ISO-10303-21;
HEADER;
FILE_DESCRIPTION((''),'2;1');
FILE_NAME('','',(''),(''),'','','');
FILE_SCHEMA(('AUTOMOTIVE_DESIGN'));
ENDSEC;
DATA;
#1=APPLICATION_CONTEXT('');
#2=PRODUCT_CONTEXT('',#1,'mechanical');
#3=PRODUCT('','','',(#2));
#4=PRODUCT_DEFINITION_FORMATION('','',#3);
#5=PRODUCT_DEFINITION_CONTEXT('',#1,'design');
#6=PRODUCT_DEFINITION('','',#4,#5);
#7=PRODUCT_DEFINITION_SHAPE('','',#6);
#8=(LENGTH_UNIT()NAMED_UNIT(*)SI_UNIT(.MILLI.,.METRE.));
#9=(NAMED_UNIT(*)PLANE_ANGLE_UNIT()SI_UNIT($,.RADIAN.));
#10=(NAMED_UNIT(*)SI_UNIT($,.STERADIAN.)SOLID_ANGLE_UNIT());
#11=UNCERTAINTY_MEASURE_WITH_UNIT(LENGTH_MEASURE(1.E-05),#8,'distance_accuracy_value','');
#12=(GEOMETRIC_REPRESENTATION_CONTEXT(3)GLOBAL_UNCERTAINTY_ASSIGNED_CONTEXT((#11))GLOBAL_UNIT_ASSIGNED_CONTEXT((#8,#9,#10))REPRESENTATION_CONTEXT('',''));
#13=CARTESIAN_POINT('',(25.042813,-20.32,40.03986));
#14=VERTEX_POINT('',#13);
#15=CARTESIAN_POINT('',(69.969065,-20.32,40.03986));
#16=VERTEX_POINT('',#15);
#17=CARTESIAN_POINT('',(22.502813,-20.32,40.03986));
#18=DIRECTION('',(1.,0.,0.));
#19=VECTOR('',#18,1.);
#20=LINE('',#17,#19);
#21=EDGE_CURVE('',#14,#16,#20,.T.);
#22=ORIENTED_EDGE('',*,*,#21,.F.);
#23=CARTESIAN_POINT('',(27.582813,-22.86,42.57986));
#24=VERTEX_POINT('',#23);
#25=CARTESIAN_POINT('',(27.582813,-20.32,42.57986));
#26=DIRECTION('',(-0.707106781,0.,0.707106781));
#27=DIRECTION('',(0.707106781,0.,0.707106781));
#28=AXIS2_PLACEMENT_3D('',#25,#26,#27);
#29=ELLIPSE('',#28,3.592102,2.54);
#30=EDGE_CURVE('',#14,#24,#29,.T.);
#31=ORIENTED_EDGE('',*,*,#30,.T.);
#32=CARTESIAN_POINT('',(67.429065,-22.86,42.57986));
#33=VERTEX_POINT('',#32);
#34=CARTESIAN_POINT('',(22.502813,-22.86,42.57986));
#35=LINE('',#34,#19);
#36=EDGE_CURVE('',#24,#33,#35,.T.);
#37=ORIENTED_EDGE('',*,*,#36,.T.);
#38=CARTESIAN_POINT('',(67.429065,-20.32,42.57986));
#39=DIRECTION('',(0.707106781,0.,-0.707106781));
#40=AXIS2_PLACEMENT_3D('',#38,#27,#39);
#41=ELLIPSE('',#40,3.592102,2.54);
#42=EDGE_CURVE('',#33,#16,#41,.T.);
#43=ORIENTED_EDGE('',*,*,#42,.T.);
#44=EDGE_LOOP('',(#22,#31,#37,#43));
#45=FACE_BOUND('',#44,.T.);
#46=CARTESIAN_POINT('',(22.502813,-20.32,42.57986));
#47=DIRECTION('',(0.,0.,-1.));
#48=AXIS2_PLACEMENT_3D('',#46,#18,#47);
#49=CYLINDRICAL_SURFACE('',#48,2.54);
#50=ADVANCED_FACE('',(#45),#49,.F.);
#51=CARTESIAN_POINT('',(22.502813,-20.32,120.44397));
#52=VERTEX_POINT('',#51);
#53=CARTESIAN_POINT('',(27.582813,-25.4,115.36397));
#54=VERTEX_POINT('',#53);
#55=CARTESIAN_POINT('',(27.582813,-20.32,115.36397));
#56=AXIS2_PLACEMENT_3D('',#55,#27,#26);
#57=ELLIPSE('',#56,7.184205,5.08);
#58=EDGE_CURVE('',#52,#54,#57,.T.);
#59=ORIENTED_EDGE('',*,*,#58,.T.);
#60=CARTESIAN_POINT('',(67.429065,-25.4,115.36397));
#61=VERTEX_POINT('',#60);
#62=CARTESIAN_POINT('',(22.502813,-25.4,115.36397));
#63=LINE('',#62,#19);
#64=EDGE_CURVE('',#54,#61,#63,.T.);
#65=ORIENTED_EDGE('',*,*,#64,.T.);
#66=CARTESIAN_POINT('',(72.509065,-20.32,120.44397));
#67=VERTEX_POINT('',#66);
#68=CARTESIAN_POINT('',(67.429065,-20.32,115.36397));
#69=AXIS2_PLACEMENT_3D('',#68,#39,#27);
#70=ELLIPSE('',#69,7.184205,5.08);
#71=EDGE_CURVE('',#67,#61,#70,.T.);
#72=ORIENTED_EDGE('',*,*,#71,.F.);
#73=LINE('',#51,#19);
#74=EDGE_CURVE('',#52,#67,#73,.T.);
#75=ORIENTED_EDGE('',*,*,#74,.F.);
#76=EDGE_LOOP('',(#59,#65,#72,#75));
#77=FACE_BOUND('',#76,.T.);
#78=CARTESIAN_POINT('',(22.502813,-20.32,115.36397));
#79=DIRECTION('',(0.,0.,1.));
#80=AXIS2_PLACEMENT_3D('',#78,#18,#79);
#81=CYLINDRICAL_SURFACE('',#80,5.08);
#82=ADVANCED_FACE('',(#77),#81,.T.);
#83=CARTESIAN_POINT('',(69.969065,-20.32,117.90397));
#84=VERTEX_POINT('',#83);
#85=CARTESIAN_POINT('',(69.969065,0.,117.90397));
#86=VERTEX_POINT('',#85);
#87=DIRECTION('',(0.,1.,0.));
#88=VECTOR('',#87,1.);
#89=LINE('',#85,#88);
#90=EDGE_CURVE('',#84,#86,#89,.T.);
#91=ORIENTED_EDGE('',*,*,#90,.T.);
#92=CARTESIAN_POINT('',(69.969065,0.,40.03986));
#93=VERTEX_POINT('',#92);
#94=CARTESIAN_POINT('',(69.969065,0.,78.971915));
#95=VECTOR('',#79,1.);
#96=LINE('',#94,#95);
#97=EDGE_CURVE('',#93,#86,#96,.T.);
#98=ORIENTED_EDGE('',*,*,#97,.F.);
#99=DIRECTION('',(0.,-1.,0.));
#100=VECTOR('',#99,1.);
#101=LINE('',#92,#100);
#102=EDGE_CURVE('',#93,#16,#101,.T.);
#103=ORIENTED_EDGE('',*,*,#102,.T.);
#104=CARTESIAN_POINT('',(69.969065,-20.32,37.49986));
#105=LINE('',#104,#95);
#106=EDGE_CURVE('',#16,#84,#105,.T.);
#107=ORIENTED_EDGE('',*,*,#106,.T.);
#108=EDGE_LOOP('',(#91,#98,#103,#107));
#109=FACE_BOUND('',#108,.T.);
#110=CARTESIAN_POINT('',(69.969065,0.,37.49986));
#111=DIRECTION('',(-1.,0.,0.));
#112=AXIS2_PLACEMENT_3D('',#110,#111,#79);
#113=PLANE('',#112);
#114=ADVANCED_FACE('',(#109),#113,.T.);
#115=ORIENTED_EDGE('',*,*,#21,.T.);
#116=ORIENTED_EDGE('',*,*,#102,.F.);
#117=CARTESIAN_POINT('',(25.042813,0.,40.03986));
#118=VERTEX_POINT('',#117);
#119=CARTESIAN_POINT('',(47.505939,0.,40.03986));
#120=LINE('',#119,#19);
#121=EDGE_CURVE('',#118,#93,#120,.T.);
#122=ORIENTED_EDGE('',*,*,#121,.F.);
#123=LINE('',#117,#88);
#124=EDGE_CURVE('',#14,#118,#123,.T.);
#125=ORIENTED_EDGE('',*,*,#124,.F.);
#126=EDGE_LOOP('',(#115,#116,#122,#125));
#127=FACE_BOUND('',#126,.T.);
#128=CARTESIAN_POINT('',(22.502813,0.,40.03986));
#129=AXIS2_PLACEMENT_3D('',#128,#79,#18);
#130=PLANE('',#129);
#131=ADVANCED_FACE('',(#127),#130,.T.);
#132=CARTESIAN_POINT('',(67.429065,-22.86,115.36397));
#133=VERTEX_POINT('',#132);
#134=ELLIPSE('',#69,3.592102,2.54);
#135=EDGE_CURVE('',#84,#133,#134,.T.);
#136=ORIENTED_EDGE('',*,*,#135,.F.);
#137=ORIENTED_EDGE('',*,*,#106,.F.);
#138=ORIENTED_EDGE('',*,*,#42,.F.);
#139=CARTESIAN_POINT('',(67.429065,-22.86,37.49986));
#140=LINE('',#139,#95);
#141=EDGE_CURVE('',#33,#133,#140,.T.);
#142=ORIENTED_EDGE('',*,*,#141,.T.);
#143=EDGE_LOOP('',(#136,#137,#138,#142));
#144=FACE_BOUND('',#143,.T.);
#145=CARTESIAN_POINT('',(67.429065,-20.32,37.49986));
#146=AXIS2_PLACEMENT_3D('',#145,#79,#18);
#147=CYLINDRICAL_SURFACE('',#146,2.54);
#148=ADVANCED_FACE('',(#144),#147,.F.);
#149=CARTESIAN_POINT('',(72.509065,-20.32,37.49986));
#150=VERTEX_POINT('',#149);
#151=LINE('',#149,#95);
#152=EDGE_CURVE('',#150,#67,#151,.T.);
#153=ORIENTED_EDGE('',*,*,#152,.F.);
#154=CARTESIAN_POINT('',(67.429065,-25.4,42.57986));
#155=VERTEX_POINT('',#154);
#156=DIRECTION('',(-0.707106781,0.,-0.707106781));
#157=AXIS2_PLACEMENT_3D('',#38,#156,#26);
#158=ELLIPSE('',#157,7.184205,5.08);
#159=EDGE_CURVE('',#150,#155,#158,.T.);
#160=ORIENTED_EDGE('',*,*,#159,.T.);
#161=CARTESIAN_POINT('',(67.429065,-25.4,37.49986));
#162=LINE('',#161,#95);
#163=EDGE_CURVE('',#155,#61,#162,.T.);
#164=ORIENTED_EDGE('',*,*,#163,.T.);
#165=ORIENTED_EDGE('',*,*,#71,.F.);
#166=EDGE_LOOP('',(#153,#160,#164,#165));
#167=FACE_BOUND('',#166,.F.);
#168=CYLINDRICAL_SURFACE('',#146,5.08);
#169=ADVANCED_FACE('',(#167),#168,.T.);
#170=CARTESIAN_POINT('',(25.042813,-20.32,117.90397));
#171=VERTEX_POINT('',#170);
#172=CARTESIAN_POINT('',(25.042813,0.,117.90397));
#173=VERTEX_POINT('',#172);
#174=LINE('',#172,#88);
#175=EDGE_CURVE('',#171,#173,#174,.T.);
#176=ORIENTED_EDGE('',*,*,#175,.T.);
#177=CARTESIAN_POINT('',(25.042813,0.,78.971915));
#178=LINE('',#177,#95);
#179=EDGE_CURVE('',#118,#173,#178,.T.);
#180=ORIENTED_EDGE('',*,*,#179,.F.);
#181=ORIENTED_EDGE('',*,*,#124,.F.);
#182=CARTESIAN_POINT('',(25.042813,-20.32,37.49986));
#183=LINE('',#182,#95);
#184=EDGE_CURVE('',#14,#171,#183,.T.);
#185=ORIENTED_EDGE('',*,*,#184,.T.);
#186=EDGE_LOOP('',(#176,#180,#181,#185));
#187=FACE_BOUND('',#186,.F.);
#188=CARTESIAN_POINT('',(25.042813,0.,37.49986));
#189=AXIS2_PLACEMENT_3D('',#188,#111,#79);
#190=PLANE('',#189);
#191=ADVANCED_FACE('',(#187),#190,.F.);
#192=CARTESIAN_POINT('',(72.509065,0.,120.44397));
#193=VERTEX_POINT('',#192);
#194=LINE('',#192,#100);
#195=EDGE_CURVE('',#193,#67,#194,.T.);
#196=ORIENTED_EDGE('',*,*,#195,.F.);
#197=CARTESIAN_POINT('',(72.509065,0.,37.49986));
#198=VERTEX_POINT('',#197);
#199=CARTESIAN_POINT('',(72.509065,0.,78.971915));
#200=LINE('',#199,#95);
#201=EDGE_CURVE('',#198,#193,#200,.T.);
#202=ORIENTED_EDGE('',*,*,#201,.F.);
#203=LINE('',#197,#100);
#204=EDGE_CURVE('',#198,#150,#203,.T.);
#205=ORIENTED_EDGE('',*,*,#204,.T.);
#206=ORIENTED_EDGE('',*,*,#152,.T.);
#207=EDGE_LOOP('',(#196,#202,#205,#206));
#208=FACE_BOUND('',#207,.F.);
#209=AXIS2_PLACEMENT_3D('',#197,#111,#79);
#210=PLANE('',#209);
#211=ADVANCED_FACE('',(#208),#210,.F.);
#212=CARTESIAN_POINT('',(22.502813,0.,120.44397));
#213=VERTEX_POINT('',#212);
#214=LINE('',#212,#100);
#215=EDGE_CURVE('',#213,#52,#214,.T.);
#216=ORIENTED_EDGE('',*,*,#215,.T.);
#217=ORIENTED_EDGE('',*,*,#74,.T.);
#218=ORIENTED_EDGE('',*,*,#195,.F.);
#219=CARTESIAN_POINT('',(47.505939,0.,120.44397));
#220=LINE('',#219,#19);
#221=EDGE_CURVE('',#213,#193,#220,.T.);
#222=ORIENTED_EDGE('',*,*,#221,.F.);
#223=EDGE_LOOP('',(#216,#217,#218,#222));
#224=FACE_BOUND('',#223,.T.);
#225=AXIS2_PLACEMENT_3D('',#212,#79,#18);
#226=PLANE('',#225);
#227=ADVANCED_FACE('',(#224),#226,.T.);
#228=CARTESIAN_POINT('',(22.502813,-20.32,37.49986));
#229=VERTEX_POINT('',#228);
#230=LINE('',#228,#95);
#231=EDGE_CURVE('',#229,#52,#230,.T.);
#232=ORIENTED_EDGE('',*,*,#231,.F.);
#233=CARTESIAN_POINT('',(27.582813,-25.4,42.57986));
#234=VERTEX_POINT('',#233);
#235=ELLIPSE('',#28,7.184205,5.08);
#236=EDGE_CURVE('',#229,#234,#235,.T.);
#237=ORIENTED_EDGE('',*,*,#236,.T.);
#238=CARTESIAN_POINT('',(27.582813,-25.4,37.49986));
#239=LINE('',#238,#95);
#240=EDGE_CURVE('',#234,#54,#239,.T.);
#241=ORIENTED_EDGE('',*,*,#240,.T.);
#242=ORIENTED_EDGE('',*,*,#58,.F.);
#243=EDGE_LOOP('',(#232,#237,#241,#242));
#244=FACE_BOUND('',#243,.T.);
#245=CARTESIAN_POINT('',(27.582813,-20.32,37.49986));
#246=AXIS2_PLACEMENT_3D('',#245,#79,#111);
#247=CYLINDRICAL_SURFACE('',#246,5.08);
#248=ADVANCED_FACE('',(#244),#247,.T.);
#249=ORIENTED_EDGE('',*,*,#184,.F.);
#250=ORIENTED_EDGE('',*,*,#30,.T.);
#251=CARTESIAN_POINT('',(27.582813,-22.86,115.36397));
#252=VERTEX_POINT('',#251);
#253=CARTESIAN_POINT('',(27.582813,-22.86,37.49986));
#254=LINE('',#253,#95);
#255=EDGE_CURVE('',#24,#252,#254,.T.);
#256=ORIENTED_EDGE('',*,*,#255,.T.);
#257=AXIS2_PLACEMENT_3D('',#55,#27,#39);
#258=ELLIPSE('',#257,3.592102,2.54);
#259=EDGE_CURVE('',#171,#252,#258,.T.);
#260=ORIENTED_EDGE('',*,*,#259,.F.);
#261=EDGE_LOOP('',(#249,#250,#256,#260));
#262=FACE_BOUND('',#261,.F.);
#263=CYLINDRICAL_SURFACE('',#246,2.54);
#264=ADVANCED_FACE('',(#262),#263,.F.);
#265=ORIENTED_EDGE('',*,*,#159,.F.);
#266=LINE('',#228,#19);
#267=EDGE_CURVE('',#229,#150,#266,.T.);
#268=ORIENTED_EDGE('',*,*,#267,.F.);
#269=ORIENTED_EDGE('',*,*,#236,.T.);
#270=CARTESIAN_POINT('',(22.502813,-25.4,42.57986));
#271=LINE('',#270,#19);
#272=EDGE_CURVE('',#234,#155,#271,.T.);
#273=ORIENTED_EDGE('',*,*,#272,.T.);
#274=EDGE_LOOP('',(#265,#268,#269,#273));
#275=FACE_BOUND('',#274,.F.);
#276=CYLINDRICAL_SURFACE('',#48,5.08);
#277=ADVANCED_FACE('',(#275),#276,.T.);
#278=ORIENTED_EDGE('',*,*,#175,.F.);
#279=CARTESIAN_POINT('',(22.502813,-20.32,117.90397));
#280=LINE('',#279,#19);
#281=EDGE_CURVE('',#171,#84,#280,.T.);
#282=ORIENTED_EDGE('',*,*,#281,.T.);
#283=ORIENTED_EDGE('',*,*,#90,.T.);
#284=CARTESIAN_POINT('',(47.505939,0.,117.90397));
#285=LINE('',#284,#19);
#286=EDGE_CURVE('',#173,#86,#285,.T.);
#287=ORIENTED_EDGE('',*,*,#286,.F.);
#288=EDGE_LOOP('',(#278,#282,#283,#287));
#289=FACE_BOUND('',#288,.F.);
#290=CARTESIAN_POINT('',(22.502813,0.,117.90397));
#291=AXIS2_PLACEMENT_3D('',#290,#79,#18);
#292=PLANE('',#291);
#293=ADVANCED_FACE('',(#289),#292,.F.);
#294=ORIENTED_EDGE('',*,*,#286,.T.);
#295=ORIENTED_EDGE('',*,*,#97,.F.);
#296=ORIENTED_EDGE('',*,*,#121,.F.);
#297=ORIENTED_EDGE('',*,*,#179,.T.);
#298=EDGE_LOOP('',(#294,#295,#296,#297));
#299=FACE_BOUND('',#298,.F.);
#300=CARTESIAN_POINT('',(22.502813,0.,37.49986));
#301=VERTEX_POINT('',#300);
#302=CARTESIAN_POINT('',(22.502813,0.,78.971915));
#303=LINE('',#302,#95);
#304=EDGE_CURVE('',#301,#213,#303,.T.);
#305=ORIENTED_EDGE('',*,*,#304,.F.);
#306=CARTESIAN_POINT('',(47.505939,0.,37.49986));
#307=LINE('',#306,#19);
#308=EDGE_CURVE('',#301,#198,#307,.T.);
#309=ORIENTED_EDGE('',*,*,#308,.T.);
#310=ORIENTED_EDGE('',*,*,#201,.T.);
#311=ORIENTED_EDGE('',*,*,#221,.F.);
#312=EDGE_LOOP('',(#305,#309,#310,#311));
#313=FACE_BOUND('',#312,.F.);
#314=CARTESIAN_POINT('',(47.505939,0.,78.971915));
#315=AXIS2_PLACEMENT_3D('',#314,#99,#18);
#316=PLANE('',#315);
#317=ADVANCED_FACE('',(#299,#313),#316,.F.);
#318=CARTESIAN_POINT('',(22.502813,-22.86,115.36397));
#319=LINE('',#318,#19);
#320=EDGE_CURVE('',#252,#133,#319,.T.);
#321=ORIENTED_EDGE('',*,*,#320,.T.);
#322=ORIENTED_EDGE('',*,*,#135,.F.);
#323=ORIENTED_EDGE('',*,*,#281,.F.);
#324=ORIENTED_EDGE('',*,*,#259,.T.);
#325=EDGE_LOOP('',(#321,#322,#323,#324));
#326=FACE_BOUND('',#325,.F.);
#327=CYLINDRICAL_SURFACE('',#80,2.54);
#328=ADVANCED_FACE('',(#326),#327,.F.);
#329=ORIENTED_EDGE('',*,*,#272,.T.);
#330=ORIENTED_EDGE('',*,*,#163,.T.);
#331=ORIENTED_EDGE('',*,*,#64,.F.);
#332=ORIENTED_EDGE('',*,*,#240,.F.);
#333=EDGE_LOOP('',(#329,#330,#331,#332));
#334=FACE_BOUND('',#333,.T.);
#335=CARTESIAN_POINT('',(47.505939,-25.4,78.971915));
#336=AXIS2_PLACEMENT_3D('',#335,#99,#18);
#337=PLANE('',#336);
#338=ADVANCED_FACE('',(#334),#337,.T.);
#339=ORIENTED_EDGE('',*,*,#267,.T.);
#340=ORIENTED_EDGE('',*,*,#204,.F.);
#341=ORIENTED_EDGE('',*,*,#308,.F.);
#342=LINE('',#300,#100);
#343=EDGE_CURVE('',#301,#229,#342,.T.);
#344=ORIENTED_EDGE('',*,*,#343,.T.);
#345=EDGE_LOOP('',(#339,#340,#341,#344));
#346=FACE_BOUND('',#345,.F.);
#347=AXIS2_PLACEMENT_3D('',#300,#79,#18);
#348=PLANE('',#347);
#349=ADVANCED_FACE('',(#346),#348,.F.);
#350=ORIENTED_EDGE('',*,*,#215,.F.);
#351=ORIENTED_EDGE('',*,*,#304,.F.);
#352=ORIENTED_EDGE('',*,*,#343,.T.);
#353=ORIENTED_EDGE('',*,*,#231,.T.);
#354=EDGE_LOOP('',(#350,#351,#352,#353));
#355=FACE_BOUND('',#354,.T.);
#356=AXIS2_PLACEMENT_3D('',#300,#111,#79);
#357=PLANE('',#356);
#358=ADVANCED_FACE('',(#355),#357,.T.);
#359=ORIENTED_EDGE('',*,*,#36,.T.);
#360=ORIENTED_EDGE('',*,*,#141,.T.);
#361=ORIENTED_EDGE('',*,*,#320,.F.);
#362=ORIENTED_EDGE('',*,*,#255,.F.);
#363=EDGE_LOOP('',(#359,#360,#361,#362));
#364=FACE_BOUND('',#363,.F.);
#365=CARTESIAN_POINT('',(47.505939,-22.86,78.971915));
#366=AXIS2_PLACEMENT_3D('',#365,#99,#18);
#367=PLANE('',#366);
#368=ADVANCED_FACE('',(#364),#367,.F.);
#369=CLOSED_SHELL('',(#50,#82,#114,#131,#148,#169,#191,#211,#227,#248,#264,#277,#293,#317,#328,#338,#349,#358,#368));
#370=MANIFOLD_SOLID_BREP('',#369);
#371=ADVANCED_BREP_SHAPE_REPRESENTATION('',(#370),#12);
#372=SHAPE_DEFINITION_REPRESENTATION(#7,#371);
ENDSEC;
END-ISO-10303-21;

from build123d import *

# Parameters (mm, degrees)
F0_W     = 50.0062517822
F0_H     = 82.9441100359
F1_DEPTH = 25.4
F2_R     = 5.08
F3_T     = -2.54


# Not quite as in the source:
# - the program builds the solid bodies; features that only make, move or delete a surface that nothing else refers to are left out


with BuildPart() as f1:
    # F0 (on Front) → F1 (new body)
    with BuildSketch(Plane.XZ):
        with Locations((47.5059393793, 78.971914947)):
            Rectangle(F0_W, F0_H)
    extrude(amount=F1_DEPTH)

    # F2
    f2_edges = [f1.edges().sort_by_distance(p)[0] for p in [
        (72.509065, -25.4, 78.971915),
        (22.502813, -25.4, 78.971915),
        (47.505939, -25.4, 120.44397),
        (47.505939, -25.4, 37.49986),
    ]]
    fillet(f2_edges, radius=F2_R)

    # F3
    f3_openings = [f1.faces().sort_by_distance(p)[0] for p in [
        (47.505939, 0, 78.971915),
    ]]
    offset(amount=F3_T, openings=f3_openings)


solid = f1.part
